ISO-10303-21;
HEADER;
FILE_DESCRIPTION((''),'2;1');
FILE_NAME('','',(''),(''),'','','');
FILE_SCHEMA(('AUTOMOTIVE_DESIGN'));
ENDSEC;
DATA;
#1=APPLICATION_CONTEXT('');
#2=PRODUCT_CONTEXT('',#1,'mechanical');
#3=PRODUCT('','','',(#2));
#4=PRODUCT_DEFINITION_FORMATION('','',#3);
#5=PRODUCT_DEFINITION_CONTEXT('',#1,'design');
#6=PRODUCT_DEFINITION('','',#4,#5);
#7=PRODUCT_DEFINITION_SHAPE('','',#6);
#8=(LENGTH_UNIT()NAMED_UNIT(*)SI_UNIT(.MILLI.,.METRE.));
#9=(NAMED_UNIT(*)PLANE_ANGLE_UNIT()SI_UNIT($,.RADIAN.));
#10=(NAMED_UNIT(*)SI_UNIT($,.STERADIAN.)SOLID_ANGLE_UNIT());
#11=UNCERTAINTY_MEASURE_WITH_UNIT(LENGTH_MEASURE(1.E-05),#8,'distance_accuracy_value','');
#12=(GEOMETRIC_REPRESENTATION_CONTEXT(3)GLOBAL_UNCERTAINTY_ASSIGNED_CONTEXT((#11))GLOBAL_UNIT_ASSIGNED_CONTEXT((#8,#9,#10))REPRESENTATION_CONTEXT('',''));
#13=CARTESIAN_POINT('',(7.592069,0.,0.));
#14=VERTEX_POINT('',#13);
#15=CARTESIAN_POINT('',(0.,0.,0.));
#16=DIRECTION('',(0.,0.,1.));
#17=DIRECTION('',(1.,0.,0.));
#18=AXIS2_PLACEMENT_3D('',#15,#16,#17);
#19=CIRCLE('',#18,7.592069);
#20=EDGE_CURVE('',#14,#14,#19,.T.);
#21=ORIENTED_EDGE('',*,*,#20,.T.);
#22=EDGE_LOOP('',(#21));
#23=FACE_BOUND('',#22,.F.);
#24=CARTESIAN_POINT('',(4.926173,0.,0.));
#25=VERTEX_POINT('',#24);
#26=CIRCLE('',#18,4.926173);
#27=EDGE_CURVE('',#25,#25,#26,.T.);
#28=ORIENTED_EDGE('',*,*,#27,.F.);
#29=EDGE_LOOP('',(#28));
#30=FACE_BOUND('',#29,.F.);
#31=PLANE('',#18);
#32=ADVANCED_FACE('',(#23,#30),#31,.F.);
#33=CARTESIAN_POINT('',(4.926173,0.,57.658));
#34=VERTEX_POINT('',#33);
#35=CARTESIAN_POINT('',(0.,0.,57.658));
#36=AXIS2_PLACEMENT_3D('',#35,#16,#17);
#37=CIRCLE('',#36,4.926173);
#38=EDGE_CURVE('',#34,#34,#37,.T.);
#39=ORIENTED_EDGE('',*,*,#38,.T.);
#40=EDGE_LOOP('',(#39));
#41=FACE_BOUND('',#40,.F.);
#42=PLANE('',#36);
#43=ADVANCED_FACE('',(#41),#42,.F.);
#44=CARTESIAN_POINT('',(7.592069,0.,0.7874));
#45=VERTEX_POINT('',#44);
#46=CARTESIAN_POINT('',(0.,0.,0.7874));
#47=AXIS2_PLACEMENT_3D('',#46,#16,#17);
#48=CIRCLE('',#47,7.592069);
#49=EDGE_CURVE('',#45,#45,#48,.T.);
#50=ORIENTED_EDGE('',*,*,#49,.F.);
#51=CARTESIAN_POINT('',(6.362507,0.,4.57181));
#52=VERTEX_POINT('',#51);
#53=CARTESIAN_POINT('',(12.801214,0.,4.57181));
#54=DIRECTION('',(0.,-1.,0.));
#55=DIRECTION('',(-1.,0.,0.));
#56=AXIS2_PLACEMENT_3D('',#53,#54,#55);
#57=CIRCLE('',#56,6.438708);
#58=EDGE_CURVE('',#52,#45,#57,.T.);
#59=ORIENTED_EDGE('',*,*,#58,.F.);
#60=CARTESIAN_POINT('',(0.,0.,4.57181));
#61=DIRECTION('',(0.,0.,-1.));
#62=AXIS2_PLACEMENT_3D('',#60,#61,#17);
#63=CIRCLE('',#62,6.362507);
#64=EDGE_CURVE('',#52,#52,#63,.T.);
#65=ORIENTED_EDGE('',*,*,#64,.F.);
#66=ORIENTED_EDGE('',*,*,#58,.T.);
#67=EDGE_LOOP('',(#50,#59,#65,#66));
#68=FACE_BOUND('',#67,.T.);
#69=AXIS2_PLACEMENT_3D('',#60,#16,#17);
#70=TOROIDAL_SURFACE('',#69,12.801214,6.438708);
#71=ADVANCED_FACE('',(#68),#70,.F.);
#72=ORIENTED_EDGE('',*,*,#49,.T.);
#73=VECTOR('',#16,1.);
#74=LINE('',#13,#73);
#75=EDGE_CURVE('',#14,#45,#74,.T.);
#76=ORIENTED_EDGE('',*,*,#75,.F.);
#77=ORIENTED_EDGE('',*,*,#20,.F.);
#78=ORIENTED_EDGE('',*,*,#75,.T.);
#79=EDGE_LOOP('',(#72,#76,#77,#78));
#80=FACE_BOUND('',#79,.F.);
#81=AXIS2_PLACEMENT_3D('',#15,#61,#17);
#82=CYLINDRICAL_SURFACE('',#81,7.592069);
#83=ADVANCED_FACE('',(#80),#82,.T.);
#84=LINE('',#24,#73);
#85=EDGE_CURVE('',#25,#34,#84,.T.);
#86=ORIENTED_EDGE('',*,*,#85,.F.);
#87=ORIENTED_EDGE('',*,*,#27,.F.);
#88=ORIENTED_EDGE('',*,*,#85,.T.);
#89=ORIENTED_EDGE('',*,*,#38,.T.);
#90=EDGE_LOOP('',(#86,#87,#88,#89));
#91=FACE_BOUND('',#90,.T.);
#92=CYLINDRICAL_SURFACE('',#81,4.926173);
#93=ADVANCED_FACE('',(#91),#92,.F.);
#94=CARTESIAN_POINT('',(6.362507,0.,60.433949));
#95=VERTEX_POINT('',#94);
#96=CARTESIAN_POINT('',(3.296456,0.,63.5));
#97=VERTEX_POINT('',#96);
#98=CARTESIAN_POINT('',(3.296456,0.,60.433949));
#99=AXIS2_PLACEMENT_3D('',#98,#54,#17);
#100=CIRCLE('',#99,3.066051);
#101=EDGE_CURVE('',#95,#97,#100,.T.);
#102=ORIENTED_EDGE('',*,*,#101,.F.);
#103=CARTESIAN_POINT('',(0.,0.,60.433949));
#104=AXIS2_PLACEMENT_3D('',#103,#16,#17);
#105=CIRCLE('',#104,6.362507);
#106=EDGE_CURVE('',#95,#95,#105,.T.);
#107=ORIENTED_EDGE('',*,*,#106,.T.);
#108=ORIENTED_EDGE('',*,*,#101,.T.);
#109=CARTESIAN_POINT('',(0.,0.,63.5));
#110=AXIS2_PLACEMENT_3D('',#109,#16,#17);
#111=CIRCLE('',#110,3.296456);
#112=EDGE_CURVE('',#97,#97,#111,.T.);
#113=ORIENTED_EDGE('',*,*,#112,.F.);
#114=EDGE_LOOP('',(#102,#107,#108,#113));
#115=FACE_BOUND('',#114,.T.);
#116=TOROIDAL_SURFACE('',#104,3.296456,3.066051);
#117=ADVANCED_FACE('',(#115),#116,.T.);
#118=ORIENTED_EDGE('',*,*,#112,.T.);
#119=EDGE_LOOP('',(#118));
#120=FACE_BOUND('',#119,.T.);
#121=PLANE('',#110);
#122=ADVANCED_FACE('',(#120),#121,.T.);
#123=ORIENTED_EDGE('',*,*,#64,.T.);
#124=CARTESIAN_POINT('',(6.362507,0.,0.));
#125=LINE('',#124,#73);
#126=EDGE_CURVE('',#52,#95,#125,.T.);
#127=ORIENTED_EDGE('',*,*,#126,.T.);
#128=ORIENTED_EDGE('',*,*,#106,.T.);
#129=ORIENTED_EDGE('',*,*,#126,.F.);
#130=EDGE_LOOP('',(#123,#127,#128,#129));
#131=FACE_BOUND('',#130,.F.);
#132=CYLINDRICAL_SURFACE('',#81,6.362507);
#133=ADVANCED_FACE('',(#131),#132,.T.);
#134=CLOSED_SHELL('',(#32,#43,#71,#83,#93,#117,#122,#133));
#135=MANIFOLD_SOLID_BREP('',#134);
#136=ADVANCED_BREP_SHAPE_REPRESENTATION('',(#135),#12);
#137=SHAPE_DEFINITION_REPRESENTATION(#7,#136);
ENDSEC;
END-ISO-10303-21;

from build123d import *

# Parameters (mm, degrees)
F0_R      = 6.3625068229
F1_DEPTH  = 63.5
F2_R      = 4.7646286231
F3_DEPTH  = 25.146
F4_R      = 7.5920691382
F5_DEPTH  = 0.7874
F6_R      = 4.746247259
F7_DEPTH  = 35.306
F8_R      = 3.0660512242
F10_R     = 4.926173209
F11_DEPTH = 57.658


# Not quite as in the source:
# - a fillet or chamfer that OpenCascade refuses, or shapes differently, is made with other operations: its cross-section is extruded or revolved along the edge and cut away or added


with BuildPart() as f1:
    # F0 (on Top) → F1 (new body)
    with BuildSketch(Plane.XY):
        Circle(F0_R)
    extrude(amount=F1_DEPTH)

    # F2 (on face) → F3 (cut)
    with BuildSketch(Plane(origin=(0, 0, 0), x_dir=(1, 0, 0), z_dir=(0, 0, -1))):
        Circle(F2_R)
    extrude(amount=-F3_DEPTH, mode=Mode.SUBTRACT)

    # F4 (on Top) → F5 (join)
    with BuildSketch(Plane.XY):
        Circle(F4_R)
    extrude(amount=F5_DEPTH)

    # F6 (on face) → F7 (cut)
    with BuildSketch(Plane(origin=(0, 0, 0), x_dir=(1, 0, 0), z_dir=(0, 0, -1))):
        Circle(F6_R)
    extrude(amount=-F7_DEPTH, mode=Mode.SUBTRACT)

    # F8
    f8_edges = [f1.edges().sort_by_distance(p)[0] for p in [
        (-6.362507, 0, 63.5),
    ]]
    fillet(f8_edges, radius=F8_R)

    # F9: fillet of radius 6.4387075708 on 1 edges, made by hand

    # F9_s1 → F9_t2 (revolve)
    with BuildSketch(Plane.XZ):
        with BuildLine():
            ThreePointArc((6.3625068229, 4.5718102432), (6.6776076879, 2.5822384064), (7.5920691382, 0.7874))
            Line((7.5920691382, 0.7874), (6.3625068229, 0.7874))
            Line((6.3625068229, 0.7874), (6.3625068229, 4.5718102432))
        make_face()
    revolve(axis=Axis((0, 0, 0.7874), (0, 0, -1)))

    # F10 (on Top) → F11 (cut)
    with BuildSketch(Plane.XY):
        Circle(F10_R)
    extrude(amount=F11_DEPTH, mode=Mode.SUBTRACT)


solid = f1.part
